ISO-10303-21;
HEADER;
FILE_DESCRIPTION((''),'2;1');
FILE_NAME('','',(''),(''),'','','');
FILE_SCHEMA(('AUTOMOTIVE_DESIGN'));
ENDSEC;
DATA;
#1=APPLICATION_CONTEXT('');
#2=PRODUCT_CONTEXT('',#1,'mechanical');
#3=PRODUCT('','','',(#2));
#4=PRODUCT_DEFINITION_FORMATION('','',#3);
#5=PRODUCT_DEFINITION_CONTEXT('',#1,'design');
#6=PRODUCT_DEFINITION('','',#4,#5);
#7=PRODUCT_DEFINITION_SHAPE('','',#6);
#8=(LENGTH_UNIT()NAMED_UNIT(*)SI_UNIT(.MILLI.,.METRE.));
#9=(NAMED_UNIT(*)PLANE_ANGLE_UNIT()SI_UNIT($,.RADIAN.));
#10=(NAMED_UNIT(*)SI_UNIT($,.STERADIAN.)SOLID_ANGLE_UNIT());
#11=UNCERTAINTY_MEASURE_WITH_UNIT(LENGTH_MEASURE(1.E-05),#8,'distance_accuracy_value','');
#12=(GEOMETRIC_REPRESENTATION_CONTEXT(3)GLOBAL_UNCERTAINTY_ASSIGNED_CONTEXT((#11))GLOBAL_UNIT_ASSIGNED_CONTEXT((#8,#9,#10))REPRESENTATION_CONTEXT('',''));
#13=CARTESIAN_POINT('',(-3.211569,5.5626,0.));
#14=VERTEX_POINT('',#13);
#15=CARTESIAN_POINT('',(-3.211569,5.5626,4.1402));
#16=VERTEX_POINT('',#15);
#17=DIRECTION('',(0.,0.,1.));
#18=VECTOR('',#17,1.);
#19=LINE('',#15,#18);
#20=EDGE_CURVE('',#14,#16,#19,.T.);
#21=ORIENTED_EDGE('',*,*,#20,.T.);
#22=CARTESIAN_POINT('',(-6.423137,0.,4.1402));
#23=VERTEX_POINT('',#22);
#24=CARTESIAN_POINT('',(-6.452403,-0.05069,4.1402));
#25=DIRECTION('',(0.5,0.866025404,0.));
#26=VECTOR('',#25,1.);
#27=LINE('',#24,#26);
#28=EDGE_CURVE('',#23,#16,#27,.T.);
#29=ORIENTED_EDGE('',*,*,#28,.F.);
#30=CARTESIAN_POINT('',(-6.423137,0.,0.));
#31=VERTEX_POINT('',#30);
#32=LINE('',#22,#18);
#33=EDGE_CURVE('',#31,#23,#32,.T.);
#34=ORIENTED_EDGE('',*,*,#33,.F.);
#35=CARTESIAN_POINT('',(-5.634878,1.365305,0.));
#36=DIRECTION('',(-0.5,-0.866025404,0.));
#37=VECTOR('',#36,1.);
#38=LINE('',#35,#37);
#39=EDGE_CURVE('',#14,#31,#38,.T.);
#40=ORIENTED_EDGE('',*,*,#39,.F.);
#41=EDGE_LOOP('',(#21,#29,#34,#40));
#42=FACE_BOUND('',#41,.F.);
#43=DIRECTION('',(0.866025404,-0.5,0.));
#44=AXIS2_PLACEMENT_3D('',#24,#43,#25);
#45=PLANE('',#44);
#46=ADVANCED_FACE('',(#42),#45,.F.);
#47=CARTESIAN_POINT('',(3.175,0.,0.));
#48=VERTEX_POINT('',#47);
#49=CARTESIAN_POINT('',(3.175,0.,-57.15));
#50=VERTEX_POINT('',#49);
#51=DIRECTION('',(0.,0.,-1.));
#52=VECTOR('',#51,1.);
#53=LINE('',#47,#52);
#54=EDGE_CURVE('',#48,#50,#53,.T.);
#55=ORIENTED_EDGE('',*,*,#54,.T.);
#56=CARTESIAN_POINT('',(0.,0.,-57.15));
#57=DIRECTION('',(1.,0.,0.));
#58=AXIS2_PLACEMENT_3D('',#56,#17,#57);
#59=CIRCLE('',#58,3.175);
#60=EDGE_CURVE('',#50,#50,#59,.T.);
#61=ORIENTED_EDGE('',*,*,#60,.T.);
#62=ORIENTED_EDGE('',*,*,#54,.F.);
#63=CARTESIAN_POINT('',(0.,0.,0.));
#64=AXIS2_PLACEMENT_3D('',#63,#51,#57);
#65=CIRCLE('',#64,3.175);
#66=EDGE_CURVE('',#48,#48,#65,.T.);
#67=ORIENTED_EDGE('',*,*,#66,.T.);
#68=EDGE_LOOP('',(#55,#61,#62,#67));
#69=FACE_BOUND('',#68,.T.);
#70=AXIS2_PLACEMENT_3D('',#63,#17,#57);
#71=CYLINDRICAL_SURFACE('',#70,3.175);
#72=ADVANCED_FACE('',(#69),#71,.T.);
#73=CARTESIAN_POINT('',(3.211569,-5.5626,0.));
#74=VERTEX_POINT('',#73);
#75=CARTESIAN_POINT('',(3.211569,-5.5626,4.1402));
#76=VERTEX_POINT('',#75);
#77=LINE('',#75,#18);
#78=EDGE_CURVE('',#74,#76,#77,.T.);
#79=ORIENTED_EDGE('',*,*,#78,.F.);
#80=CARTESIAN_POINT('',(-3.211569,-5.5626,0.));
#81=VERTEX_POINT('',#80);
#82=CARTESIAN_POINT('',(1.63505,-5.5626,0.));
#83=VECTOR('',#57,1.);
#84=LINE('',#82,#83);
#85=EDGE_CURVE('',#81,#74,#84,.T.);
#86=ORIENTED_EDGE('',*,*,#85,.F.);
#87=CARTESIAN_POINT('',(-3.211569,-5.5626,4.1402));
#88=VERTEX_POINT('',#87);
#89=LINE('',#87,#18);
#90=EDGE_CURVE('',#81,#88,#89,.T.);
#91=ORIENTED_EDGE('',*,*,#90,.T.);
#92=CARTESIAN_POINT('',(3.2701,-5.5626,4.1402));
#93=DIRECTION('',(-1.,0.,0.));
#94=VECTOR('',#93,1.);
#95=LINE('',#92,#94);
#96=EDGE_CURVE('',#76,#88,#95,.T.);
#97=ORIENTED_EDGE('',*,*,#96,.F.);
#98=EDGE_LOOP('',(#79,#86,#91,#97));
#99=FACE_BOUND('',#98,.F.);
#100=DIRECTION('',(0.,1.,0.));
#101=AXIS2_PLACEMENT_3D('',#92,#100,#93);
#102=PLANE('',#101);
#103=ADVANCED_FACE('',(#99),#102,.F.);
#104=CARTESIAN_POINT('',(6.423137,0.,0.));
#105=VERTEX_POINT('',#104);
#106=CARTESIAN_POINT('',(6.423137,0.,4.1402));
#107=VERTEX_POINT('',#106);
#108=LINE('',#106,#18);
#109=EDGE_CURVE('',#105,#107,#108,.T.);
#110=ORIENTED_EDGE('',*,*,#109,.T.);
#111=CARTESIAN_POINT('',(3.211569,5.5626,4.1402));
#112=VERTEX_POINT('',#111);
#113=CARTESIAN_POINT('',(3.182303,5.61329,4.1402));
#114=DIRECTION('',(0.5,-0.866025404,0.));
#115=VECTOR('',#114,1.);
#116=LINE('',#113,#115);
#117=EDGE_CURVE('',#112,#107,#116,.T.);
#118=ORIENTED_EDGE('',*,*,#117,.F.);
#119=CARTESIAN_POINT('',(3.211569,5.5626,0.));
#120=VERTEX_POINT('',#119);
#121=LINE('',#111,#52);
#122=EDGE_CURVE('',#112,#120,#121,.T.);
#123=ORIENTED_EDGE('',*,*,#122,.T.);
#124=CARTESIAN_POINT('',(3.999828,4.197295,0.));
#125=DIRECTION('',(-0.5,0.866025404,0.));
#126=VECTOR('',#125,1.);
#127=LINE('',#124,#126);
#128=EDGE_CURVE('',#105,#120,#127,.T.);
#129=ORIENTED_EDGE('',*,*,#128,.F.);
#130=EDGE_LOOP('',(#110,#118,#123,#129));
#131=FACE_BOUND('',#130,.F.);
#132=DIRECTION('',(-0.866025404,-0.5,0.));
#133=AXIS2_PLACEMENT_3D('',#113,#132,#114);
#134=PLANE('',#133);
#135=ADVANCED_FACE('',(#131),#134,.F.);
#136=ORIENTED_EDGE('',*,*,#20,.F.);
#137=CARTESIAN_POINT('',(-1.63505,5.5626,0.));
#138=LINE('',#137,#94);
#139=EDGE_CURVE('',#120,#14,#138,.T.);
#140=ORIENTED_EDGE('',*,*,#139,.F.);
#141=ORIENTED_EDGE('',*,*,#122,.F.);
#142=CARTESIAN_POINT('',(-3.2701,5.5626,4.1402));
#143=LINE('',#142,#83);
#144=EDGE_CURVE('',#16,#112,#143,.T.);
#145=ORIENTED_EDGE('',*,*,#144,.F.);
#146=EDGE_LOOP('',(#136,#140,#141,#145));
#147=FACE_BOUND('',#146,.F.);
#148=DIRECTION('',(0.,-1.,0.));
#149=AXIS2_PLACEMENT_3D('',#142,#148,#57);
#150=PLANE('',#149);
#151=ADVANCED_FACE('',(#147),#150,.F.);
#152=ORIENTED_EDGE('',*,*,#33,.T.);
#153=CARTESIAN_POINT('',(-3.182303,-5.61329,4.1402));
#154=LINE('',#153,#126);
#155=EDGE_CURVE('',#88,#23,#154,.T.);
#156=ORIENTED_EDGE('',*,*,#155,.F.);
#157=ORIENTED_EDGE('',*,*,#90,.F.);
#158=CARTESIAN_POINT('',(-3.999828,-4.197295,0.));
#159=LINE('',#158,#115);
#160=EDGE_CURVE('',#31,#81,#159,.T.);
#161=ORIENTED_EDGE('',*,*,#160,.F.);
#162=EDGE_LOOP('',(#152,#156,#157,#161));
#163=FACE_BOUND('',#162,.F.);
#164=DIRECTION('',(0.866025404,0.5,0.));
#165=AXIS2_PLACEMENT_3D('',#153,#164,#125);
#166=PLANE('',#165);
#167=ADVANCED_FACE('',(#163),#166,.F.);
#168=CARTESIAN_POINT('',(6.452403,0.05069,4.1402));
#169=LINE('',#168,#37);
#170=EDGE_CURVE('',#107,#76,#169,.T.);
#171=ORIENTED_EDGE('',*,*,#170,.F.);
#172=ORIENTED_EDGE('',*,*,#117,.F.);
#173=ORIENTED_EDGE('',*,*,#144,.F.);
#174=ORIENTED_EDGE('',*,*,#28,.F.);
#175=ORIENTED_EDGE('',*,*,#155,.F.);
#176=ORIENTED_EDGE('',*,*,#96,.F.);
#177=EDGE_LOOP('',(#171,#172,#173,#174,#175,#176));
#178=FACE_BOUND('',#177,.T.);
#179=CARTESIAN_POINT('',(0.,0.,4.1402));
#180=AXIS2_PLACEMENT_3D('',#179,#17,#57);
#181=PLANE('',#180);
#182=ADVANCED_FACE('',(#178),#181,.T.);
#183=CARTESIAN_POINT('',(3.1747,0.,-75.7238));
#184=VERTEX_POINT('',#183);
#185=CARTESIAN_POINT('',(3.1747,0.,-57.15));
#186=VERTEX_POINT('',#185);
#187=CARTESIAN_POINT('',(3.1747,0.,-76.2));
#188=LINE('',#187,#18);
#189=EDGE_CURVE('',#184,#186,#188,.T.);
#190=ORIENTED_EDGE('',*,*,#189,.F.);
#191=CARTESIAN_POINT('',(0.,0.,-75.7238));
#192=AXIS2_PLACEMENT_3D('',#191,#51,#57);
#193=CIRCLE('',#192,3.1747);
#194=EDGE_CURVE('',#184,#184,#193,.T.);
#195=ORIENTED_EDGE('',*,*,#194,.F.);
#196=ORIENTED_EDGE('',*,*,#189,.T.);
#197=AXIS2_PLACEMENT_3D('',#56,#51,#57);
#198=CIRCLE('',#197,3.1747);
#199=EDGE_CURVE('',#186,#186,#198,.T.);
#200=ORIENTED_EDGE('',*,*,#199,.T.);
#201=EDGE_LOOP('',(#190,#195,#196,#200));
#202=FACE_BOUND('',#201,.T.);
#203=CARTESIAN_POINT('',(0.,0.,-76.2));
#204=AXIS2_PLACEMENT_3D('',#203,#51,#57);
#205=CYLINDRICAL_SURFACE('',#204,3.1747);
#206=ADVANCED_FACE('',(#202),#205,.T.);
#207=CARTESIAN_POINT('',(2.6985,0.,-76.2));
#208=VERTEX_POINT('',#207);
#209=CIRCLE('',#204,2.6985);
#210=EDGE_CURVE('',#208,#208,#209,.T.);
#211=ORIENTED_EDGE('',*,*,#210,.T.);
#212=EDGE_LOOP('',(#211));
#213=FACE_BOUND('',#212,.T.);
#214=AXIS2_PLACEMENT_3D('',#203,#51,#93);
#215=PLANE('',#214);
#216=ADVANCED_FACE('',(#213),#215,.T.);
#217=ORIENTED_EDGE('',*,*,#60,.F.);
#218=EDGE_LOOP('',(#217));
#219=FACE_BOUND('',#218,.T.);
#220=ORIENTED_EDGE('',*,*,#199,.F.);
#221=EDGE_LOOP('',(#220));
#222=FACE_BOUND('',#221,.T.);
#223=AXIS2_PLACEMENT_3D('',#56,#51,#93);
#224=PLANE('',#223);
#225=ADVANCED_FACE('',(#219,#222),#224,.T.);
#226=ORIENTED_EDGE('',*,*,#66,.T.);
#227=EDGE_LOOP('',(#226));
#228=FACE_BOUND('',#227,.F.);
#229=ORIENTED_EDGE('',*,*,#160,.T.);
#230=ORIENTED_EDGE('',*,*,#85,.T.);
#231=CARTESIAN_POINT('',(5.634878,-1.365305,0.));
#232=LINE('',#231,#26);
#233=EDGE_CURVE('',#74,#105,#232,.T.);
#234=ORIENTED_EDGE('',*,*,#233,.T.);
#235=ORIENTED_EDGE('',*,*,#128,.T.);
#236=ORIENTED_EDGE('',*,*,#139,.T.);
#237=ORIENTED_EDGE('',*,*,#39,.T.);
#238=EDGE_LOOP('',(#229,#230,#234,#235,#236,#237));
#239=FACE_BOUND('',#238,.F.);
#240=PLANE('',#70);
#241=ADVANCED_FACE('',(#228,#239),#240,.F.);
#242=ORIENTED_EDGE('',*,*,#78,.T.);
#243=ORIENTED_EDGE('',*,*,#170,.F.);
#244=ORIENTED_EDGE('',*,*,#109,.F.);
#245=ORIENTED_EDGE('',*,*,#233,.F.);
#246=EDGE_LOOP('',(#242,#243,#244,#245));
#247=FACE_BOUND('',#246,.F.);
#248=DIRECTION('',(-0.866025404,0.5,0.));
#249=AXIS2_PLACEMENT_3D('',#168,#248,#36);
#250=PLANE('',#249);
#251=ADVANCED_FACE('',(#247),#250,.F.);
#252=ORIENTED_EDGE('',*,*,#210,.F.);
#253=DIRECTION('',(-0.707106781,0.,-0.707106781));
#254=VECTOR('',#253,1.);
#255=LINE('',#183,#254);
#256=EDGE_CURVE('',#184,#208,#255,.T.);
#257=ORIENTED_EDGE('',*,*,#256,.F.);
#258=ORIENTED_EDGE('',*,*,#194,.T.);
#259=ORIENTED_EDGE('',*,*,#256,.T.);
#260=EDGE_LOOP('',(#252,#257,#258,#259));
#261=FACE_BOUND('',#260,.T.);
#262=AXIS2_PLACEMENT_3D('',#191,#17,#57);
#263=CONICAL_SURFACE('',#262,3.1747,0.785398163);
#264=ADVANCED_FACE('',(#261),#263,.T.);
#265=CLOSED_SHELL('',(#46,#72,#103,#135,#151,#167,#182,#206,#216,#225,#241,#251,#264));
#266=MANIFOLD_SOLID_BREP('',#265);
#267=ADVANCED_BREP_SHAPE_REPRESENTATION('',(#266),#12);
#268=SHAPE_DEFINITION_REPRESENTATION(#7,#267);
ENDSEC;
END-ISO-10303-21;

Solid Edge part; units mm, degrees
sketch "Sketch1" plane through (0, 0, 0) normal (0, 0, 1) x (1, 0, 0)
  circle A0 centre (0, 0) radius 6.4526
  dimension "D1" = 12.9052
extrude "Protrusion1" add sketch "Sketch1" along normal blind 4.1402
sketch "Sketch2" plane through (0, 0, 0) normal (0, 0, -1) x (1, 0, 0)
  circle A0 centre (0, 0) radius 3.175
extrude "Protrusion2" add sketch "Sketch2" along normal blind 76.2
sketch "Sketch3" plane through (0, 0, -76.2) normal (0, 0, -1) x (1, 0, 0)
  circle A0 centre (0, 0) radius 3.1747
extrude "Cutout1" cut sketch "Sketch3" against normal blind 19.05 flip side to cut
chamfer "Chamfer_1" distance 0.4762 angle 45 1 edges at (-3.1747, 0, -76.2)
sketch "Sketch4" plane through (0, 0, 4.1402) normal (0, 0, 1) x (1, 0, 0)
  line L0 (-3.2701, 5.5626) -> (3.2701, 5.5626)
  dimension "D1" = 11.1252
extrude "Cutout2" cut sketch "Sketch4" against normal up to next material side at (0, 5.6126, 4.1402)
pattern_circular "Pattern1" count 6 over 360 about axis through (0, 0, 4.1402) along (0, 0, 1) of "Cutout2"
properties part number "117621"
